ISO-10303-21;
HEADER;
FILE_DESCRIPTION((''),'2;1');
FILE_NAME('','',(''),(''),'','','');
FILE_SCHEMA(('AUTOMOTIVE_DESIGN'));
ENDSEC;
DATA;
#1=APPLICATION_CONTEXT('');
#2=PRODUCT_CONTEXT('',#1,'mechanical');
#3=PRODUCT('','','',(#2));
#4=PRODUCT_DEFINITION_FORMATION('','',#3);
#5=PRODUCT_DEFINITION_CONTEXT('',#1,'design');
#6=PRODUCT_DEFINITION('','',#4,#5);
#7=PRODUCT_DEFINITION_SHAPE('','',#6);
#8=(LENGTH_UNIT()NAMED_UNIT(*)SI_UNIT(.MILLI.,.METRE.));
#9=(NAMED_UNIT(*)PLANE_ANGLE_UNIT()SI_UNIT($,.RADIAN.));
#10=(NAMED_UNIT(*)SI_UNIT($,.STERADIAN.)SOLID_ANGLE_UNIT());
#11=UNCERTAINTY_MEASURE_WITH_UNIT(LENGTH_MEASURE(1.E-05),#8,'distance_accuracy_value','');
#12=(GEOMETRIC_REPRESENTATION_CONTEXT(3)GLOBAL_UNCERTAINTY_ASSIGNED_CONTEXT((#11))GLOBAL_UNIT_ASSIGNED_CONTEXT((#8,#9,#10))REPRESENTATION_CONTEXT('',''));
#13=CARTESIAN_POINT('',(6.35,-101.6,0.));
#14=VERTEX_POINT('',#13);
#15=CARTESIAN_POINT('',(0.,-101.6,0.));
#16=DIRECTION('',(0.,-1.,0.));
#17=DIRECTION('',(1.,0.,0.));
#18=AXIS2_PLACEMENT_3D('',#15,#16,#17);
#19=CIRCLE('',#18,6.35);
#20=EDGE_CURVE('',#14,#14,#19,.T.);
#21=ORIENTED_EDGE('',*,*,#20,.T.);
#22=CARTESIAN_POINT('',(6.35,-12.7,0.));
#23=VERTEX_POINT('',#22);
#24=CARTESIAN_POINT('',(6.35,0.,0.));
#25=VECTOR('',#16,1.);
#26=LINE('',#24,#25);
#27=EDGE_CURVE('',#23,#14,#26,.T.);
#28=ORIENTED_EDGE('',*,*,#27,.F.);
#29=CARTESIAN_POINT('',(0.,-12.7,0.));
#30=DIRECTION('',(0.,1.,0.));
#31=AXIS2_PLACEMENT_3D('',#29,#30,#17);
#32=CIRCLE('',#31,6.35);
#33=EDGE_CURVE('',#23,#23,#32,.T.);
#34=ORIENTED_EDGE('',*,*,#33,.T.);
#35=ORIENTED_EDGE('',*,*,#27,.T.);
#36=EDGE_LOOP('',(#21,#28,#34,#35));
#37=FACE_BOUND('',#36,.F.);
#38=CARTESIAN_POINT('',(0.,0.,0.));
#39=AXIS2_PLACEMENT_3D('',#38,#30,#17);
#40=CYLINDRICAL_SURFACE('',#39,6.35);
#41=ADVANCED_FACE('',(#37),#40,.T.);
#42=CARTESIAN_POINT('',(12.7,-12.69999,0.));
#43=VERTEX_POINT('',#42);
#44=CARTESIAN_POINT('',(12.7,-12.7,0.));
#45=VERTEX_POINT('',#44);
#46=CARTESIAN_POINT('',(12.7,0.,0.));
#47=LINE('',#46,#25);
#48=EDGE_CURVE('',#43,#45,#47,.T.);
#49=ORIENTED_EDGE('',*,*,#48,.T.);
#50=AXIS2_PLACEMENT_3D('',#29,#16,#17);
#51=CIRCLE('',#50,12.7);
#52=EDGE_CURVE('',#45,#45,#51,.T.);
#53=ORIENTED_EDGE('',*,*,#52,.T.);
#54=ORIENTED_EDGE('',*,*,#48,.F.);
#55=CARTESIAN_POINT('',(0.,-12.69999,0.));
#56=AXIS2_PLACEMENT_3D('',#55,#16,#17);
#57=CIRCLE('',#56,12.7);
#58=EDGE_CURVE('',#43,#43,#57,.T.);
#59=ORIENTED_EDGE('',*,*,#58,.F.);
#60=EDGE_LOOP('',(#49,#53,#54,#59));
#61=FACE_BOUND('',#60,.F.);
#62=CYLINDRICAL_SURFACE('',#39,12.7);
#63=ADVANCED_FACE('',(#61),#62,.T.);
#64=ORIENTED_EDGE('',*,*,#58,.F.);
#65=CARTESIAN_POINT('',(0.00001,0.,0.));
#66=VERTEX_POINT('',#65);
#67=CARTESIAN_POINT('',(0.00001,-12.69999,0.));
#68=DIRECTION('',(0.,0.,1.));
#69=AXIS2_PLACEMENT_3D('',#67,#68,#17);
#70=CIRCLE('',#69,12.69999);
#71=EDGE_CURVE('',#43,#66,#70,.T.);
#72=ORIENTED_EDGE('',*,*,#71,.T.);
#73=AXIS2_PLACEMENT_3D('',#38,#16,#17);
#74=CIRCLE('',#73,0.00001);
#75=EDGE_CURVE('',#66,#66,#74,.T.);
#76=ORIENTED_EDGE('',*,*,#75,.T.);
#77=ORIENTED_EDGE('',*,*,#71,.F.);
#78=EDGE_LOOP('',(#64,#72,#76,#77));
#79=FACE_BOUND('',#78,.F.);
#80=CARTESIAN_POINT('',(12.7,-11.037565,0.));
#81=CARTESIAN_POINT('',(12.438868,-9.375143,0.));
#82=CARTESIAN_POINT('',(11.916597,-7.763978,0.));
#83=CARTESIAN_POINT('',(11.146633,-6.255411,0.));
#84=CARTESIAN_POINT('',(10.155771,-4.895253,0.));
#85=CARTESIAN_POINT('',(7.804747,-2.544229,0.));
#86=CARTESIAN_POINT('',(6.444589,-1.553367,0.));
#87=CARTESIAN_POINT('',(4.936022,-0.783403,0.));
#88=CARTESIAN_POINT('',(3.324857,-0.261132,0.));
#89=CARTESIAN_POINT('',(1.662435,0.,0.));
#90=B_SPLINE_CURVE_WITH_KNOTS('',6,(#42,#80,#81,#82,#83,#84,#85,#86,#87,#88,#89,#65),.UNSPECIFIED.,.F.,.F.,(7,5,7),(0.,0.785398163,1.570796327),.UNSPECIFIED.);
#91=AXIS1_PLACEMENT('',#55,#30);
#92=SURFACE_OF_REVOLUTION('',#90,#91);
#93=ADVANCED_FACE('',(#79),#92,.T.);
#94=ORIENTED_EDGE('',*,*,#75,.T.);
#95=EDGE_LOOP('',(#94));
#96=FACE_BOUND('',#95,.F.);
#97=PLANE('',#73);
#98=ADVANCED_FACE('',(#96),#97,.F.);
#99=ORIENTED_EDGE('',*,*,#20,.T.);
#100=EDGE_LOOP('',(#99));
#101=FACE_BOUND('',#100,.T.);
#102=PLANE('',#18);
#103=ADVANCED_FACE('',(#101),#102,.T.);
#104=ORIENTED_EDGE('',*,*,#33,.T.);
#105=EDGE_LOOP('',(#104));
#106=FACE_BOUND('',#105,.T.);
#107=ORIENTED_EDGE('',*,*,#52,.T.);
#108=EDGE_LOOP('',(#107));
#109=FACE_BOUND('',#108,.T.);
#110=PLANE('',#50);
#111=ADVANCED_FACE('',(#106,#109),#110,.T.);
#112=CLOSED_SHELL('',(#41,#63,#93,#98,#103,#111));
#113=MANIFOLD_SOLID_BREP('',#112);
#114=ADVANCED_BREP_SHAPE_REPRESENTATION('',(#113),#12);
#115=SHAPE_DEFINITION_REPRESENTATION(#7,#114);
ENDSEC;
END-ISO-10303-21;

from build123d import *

# Parameters (mm, degrees)
F0_R     = 6.35
F1_DEPTH = 101.6
F2_R     = 12.7
F3_DEPTH = 12.7
F4_R     = 12.69999


# Not quite as in the source:
# - a fillet or chamfer is up to 0.001 mm smaller than in the source, because OpenCascade refuses the exact size


with BuildPart() as f1:
    # F0 (on Front) → F1 (new body)
    with BuildSketch(Plane.XZ):
        Circle(F0_R)
    extrude(amount=F1_DEPTH)

    # F2 (on Front) → F3 (join)
    with BuildSketch(Plane.XZ):
        Circle(F2_R)
    extrude(amount=F3_DEPTH)

    # F4 (radius 12.7 in the source; OpenCascade refuses exactly that, so slightly less here)
    f4_edges = [f1.edges().sort_by_distance(p)[0] for p in [
        (-12.7, 0, 0),
    ]]
    fillet(f4_edges, radius=F4_R)


solid = f1.part
